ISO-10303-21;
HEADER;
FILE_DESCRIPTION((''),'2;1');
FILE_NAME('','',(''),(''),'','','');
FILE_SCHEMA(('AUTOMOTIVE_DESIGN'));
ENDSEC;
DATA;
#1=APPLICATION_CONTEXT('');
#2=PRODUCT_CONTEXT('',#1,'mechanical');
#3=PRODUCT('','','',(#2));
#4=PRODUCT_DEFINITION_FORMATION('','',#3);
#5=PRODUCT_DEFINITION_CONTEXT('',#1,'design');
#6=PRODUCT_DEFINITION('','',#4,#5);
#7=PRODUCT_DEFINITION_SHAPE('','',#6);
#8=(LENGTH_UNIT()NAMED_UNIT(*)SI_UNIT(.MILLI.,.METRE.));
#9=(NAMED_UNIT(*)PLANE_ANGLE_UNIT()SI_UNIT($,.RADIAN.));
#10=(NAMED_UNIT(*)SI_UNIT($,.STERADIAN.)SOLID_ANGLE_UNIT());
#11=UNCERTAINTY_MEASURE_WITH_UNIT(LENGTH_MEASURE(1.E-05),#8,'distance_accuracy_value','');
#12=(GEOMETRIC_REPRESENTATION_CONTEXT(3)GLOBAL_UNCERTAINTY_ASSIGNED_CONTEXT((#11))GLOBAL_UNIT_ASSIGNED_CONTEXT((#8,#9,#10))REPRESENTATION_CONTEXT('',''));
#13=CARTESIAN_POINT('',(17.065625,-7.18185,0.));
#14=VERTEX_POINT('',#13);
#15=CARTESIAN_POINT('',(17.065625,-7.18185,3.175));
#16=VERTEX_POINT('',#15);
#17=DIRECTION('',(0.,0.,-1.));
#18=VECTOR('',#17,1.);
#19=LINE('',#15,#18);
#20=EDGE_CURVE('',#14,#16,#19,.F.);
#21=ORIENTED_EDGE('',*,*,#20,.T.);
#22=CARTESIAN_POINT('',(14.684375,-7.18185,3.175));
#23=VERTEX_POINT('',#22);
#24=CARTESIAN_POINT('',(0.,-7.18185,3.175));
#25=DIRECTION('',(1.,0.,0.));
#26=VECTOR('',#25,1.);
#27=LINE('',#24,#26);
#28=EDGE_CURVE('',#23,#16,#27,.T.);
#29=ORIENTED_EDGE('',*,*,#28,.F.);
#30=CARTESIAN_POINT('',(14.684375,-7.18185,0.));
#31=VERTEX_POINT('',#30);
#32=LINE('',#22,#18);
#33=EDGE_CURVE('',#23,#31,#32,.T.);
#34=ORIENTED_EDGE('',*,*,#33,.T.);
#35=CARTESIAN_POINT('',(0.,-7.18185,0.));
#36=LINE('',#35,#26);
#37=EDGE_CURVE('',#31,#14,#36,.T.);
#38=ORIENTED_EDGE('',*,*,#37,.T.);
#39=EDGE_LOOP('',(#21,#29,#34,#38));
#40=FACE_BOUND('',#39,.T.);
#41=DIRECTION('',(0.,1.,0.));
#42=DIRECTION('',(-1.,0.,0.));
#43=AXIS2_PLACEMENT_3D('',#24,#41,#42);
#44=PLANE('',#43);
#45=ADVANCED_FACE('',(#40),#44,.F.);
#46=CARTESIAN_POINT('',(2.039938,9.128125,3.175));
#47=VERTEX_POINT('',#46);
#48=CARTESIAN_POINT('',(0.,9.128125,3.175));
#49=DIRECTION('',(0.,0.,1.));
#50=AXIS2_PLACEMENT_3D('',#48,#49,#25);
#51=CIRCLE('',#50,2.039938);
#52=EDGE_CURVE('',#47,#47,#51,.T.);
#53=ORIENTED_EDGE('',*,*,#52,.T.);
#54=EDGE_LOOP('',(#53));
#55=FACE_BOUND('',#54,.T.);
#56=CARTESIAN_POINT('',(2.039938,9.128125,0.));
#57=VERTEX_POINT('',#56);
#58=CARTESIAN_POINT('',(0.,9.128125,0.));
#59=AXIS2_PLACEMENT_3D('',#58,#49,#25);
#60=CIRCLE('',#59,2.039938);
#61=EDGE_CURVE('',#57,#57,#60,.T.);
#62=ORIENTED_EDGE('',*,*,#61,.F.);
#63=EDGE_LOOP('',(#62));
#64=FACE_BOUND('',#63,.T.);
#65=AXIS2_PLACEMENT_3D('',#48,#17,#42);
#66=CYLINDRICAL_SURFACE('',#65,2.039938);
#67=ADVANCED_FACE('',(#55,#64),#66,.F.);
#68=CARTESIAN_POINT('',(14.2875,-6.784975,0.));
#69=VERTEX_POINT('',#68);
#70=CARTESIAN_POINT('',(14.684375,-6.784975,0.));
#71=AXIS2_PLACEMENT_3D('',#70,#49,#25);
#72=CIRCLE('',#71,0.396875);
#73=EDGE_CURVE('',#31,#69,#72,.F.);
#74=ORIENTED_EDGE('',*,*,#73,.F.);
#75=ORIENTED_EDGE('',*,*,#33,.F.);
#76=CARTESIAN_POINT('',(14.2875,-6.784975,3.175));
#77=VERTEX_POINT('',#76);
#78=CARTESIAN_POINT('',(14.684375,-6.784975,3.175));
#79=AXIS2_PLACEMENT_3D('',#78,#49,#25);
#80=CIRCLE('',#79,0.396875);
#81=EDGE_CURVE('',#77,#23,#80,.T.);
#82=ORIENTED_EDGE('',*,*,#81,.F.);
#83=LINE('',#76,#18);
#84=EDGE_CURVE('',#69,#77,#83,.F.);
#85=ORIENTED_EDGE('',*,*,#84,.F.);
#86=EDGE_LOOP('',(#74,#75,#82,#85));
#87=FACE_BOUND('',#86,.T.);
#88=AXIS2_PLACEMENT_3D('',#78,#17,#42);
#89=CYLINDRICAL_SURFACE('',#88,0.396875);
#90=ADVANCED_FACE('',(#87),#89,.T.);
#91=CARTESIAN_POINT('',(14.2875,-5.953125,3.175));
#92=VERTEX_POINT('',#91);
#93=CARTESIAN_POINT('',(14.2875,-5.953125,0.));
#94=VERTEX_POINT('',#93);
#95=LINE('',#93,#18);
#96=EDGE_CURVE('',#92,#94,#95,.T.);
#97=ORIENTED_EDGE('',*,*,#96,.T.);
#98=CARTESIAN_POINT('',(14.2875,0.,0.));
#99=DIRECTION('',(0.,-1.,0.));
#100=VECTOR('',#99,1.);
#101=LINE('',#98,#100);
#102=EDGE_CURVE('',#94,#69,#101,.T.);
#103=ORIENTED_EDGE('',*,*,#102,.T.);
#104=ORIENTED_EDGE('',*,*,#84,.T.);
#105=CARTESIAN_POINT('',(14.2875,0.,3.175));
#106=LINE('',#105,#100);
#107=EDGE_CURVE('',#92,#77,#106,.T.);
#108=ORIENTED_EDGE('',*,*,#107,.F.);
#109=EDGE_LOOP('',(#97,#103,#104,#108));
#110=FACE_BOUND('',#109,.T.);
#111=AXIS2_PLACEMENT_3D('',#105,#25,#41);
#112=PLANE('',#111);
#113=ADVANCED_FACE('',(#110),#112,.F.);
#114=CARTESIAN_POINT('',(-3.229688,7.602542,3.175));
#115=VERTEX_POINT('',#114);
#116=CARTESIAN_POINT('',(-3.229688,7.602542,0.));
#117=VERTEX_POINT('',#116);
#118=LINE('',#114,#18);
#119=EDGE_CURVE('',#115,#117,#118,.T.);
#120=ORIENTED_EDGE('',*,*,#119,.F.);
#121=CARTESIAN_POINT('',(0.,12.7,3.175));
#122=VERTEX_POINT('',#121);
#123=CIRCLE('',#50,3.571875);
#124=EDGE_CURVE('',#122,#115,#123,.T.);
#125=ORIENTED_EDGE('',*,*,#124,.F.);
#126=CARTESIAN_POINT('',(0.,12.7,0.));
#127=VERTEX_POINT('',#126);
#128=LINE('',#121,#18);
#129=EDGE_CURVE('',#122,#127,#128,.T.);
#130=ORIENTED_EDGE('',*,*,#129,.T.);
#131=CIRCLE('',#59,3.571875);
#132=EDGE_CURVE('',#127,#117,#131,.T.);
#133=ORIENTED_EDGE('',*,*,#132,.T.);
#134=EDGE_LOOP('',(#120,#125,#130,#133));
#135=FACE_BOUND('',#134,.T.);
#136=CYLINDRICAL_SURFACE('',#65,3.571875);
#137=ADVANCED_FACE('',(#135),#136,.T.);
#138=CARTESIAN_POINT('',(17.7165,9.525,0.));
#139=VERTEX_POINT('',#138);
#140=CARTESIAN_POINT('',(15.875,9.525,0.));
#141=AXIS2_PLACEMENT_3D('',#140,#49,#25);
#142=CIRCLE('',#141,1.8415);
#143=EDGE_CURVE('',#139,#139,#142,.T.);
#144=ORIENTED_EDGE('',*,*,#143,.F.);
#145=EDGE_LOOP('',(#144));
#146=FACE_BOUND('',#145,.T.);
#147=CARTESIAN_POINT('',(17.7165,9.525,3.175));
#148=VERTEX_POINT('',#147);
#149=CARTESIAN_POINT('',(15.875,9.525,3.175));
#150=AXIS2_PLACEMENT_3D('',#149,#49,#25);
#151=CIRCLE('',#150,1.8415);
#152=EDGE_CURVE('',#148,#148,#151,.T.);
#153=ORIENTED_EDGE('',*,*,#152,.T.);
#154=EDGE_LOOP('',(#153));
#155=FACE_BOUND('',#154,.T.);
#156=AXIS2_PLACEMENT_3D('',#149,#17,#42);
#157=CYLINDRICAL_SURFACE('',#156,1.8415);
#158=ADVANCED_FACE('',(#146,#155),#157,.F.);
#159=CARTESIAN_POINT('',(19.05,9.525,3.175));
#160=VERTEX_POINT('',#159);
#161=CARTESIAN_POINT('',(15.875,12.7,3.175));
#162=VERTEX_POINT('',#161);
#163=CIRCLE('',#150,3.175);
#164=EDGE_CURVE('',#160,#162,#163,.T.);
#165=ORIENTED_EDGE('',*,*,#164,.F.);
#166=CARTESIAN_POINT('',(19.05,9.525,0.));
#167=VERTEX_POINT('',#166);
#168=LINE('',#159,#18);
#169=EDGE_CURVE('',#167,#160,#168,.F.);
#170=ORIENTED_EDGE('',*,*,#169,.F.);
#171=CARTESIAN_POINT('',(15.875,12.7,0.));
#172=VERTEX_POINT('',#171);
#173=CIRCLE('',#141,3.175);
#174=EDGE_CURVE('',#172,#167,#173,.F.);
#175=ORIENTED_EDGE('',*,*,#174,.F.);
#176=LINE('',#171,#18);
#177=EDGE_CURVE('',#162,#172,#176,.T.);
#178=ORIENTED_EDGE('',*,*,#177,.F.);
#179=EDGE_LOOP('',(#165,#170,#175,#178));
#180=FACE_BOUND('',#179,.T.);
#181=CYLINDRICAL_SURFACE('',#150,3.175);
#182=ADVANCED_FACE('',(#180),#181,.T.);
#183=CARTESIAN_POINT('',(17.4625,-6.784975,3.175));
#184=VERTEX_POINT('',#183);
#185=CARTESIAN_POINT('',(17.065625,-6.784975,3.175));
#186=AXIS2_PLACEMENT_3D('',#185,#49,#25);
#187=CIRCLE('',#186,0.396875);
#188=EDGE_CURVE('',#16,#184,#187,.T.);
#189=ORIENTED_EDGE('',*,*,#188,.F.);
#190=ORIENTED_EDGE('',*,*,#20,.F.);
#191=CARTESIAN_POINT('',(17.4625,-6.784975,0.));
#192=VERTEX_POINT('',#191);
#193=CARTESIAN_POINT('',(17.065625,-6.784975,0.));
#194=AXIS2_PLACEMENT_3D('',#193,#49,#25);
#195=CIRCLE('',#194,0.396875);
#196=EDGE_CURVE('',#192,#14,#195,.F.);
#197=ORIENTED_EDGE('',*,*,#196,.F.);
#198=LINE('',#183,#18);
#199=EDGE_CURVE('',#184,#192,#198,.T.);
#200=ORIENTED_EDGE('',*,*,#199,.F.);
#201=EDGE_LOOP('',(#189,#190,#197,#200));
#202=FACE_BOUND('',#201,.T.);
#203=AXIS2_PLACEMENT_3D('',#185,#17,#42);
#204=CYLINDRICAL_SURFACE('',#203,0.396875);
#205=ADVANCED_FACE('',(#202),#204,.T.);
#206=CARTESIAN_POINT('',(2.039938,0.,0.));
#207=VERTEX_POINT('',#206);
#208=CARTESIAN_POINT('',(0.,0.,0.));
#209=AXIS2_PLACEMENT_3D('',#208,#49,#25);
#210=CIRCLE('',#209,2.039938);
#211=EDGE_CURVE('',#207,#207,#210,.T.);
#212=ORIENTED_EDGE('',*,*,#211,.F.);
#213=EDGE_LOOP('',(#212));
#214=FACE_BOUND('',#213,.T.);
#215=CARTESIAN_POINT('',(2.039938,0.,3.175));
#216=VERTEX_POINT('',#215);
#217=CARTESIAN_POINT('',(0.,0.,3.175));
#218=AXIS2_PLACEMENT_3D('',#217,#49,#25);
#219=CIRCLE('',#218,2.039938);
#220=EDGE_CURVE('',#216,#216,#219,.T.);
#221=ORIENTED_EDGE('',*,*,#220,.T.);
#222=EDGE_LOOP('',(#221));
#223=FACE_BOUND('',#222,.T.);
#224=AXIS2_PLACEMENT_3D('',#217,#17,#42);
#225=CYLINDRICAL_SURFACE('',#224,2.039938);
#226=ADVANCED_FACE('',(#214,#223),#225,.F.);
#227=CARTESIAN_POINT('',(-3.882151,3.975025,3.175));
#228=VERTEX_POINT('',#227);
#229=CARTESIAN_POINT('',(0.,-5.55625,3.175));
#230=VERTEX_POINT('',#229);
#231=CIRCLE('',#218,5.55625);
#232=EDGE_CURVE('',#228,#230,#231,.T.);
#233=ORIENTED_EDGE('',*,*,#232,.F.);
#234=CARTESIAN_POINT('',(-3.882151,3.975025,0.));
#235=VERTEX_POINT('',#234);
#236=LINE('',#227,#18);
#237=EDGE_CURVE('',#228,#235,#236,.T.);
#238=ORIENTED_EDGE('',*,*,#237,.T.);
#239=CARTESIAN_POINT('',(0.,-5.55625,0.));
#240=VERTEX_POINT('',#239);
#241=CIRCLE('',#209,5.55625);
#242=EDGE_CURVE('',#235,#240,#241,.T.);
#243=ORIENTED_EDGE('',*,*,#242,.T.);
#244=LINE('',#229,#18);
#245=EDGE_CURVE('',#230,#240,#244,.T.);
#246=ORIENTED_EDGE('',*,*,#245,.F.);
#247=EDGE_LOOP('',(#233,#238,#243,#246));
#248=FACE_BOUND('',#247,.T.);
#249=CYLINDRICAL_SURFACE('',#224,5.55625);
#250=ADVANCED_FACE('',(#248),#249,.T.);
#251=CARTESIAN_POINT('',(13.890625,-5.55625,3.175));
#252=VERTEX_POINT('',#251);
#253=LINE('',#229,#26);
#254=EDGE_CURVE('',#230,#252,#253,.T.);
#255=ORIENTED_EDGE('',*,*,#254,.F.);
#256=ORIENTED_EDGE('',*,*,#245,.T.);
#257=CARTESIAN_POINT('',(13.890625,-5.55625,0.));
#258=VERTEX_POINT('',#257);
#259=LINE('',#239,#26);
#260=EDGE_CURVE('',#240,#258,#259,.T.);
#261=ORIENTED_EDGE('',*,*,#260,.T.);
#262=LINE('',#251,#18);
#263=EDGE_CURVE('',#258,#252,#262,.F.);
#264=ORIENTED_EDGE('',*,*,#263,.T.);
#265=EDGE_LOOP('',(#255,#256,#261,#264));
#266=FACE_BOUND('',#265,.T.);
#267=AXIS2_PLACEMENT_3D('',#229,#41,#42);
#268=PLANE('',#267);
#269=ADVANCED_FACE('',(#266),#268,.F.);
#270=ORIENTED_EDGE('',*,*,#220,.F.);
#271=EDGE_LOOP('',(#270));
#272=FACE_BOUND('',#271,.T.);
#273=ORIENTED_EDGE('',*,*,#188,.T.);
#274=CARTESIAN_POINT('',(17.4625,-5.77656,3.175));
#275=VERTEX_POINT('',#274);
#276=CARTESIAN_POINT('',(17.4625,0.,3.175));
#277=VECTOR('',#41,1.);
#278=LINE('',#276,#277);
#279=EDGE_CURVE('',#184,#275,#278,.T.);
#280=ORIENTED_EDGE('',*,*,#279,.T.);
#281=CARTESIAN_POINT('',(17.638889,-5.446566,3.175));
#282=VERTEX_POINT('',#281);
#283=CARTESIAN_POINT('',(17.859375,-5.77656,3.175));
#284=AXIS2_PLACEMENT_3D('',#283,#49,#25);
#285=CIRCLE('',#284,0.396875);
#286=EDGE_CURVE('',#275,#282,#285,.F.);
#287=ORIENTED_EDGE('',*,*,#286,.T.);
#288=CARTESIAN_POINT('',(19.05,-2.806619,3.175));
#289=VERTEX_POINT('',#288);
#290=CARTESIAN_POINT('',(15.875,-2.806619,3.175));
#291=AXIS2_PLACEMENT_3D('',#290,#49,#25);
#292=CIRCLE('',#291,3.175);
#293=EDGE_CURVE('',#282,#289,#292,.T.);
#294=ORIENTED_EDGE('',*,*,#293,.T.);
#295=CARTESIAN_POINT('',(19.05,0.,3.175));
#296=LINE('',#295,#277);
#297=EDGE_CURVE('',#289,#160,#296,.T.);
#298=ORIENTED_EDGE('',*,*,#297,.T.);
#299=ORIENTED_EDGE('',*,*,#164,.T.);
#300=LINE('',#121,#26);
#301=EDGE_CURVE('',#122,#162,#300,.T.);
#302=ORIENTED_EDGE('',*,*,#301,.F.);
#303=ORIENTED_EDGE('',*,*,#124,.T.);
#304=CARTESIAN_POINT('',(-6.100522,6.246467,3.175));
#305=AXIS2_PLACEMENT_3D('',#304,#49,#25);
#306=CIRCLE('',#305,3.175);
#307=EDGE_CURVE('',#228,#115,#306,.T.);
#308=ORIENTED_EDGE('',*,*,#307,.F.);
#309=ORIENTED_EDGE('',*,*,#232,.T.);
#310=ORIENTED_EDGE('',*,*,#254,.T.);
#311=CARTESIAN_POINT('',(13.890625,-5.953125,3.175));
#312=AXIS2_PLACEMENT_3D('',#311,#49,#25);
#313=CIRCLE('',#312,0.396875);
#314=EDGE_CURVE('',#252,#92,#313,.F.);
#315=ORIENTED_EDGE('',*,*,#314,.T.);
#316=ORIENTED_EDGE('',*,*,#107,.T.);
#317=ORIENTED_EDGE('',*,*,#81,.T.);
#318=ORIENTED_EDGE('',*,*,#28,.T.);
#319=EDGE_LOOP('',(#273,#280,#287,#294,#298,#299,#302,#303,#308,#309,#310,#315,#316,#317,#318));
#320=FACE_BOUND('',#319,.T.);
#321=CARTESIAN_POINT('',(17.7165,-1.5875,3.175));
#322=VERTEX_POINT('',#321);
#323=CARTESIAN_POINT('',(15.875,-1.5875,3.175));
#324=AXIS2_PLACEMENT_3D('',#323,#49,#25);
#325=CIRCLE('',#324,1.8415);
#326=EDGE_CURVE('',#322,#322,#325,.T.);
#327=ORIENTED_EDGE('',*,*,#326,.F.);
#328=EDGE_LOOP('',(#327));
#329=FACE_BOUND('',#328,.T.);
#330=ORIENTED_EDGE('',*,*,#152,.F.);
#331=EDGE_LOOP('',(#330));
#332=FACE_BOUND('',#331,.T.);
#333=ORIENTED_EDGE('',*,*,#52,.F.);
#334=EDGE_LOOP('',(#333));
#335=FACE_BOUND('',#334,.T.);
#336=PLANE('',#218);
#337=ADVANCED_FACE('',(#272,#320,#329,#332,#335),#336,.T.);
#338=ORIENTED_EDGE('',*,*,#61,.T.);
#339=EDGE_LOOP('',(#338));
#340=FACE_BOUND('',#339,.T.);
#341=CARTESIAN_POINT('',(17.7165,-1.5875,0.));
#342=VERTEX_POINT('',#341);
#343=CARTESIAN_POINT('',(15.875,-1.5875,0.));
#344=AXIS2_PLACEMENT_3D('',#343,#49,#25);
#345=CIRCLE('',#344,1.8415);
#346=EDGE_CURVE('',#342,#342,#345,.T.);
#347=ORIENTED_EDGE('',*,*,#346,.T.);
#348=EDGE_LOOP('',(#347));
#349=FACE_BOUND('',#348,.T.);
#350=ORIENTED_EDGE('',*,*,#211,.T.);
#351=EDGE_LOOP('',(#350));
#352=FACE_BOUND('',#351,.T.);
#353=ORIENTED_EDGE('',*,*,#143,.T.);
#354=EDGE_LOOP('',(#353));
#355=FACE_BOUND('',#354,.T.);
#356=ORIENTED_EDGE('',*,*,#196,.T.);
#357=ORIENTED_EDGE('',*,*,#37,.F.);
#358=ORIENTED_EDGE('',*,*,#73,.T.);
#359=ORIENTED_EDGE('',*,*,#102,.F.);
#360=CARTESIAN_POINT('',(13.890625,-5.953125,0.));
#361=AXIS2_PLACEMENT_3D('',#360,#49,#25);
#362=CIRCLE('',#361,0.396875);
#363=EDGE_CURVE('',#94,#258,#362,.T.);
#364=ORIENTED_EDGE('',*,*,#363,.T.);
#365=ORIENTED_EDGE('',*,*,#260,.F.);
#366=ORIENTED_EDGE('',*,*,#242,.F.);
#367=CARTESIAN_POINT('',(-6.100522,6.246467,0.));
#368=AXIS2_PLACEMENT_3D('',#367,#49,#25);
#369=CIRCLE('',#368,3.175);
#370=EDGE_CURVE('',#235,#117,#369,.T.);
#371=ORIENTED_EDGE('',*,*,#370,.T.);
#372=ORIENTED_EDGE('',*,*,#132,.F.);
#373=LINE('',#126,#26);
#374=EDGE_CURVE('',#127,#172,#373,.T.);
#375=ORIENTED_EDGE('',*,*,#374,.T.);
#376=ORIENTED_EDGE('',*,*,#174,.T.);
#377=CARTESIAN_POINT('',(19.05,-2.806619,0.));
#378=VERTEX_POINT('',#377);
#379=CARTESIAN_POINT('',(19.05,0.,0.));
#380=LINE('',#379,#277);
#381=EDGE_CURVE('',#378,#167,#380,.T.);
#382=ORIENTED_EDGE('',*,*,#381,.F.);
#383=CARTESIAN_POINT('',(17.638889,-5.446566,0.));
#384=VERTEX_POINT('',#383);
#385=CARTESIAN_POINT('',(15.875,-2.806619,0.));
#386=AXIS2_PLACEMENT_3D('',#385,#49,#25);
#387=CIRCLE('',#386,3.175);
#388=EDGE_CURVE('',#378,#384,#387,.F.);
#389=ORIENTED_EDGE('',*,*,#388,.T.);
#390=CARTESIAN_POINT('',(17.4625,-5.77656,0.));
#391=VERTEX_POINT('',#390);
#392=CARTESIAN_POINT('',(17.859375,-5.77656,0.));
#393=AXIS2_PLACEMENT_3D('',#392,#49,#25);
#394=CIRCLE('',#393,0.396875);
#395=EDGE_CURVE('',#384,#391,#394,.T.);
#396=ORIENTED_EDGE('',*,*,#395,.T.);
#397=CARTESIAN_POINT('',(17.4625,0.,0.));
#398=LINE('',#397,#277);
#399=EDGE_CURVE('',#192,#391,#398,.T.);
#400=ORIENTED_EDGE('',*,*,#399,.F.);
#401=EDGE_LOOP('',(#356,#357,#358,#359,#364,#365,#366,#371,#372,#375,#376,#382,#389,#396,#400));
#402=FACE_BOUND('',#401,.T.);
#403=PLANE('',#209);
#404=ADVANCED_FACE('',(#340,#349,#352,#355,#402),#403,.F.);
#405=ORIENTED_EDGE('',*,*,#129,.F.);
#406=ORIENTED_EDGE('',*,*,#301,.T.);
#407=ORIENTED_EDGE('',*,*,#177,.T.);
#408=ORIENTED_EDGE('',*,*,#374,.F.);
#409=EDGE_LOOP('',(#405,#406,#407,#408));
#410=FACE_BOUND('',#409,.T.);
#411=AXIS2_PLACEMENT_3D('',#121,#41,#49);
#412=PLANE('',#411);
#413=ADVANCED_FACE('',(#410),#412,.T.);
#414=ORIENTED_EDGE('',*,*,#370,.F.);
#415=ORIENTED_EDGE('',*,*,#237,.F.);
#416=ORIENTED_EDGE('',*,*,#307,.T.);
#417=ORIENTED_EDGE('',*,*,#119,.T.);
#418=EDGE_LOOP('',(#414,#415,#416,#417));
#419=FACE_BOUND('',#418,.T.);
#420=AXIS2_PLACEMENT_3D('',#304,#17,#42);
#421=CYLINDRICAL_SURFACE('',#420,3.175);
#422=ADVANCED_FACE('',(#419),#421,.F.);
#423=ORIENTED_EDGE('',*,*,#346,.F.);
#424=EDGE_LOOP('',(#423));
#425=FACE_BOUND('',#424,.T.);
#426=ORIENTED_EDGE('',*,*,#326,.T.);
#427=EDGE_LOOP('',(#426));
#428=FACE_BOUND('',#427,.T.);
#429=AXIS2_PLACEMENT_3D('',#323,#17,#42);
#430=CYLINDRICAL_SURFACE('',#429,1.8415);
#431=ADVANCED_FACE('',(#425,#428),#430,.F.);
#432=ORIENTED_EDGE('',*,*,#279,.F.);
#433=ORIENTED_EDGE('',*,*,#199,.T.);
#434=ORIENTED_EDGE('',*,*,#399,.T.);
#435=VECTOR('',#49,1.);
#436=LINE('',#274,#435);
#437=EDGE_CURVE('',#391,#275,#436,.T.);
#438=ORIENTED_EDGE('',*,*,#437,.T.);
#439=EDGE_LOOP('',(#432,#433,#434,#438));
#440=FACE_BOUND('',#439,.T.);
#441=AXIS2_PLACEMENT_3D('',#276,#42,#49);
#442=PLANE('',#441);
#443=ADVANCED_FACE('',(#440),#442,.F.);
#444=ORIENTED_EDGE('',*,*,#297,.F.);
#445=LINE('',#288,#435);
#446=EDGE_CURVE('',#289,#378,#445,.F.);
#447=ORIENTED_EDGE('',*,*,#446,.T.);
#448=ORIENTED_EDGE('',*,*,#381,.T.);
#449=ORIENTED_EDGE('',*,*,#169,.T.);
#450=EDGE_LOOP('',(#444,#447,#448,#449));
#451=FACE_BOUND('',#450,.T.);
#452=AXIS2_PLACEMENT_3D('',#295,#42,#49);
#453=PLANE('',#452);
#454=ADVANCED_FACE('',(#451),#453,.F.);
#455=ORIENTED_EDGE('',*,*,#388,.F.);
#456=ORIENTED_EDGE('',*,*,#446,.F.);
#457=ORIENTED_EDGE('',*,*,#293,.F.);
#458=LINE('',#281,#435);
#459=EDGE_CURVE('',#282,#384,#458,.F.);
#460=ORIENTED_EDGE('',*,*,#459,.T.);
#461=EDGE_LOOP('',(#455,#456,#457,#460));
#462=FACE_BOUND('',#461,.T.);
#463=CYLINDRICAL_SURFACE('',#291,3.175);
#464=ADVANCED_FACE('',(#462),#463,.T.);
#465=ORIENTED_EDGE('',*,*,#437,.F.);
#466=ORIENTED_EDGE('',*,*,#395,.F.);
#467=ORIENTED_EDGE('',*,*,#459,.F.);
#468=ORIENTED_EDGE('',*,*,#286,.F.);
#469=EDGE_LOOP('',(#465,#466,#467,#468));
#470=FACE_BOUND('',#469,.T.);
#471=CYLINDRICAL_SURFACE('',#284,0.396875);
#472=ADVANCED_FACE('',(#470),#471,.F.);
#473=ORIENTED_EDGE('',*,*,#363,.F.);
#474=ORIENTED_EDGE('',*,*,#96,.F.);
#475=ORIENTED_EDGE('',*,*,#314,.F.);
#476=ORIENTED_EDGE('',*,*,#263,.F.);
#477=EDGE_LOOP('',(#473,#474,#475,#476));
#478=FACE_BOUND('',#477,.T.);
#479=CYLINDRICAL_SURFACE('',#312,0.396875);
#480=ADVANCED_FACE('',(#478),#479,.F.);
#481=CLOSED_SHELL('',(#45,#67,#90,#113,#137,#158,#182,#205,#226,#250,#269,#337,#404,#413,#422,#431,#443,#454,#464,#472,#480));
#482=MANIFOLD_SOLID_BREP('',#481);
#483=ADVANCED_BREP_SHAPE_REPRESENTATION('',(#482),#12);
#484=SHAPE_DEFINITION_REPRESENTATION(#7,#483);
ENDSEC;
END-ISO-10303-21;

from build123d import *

# Parameters (mm, degrees)
SKETCH3_R           = 1.8415
SKETCH3_R_2         = 2.0399375
BOSS_EXTRUDE1_DEPTH = 3.175
FILLET1_R           = 3.175
FILLET2_R           = 0.396875


with BuildPart() as part:
    # Sketch3 → Boss-Extrude1 (new body)
    with BuildSketch(Plane.XY):
        with BuildLine():
            Line((0, -5.55625), (14.2875, -5.55625))
            Line((14.2875, -5.55625), (14.2875, -7.18185))
            Line((14.2875, -7.18185), (17.4625, -7.18185))
            Line((17.4625, -7.18185), (17.4625, -5.55625))
            Line((17.4625, -5.55625), (19.05, -5.55625))
            Line((19.05, -5.55625), (19.05, 12.7))
            Line((19.05, 12.7), (0, 12.7))
            ThreePointArc((0, 12.7), (-3.017240851, 11.039812386), (-3.229688204, 7.602541465))
            ThreePointArc((-3.229688204, 7.602541465), (-2.975666517, 5.684416089), (-3.882150485, 3.975024739))
            ThreePointArc((-3.882150485, 3.975024739), (-5.145782024, -2.095910644), (0, -5.55625))
        make_face()
        with Locations((15.875, 9.525)):
            Circle(SKETCH3_R, mode=Mode.SUBTRACT)
        with Locations((15.875, -1.5875)):
            Circle(SKETCH3_R, mode=Mode.SUBTRACT)
        with Locations((0, 9.128125)):
            Circle(SKETCH3_R_2, mode=Mode.SUBTRACT)
        Circle(SKETCH3_R_2, mode=Mode.SUBTRACT)
    extrude(amount=BOSS_EXTRUDE1_DEPTH)

    # Fillet1
    # the kernel refuses this fillet: 3.175 mm, written as the material it takes off along each edge
    with BuildSketch(Plane(origin=(19.05, -5.55625, -6.874076643), x_dir=(-1, 0, 0), z_dir=(0, 0, 1))) as fillet1_piece_1:
        with BuildLine():
            CenterArc((3.175, -2.749630657), FILLET1_R, 120, 60)
            Line((0, -2.749630657), (-0.0635, -2.749630657))
            Line((-0.0635, -2.749630657), (-0.0635, 0))
            Line((-0.0635, 0), (0, 0.0635))
            ThreePointArc((0, 0.0635), (0.79375, 0.0635), (1.55575, 0.054992613))
            Line((1.55575, 0.054992613), (1.5875, 0))
        make_face()
    extrude(amount=16.923153285, mode=Mode.SUBTRACT)
    with BuildSketch(Plane(origin=(19.05, 12.7, -7.9375), x_dir=(0, -1, 0), z_dir=(0, 0, 1))) as fillet1_piece_2:
        with BuildLine():
            CenterArc((FILLET1_R, -FILLET1_R), FILLET1_R, 90, 90)
            Line((0, -FILLET1_R), (-FILLET1_R * 0.02, -FILLET1_R))
            Line((-FILLET1_R * 0.02, -FILLET1_R), (-FILLET1_R * 0.02, FILLET1_R * 0.02))
            Line((-FILLET1_R * 0.02, FILLET1_R * 0.02), (FILLET1_R, FILLET1_R * 0.02))
            Line((FILLET1_R, FILLET1_R * 0.02), (FILLET1_R, 0))
        make_face()
    extrude(amount=19.05, mode=Mode.SUBTRACT)

    # Fillet2
    fillet2_edges = [part.edges().sort_by_distance(p)[0] for p in [
        (17.4625, -5.55625, 1.5875),
        (17.4625, -7.18185, 1.5875),
        (14.2875, -7.18185, 1.5875),
        (14.2875, -5.55625, 1.5875),
    ]]
    fillet(fillet2_edges, radius=FILLET2_R)


solid = part.part
